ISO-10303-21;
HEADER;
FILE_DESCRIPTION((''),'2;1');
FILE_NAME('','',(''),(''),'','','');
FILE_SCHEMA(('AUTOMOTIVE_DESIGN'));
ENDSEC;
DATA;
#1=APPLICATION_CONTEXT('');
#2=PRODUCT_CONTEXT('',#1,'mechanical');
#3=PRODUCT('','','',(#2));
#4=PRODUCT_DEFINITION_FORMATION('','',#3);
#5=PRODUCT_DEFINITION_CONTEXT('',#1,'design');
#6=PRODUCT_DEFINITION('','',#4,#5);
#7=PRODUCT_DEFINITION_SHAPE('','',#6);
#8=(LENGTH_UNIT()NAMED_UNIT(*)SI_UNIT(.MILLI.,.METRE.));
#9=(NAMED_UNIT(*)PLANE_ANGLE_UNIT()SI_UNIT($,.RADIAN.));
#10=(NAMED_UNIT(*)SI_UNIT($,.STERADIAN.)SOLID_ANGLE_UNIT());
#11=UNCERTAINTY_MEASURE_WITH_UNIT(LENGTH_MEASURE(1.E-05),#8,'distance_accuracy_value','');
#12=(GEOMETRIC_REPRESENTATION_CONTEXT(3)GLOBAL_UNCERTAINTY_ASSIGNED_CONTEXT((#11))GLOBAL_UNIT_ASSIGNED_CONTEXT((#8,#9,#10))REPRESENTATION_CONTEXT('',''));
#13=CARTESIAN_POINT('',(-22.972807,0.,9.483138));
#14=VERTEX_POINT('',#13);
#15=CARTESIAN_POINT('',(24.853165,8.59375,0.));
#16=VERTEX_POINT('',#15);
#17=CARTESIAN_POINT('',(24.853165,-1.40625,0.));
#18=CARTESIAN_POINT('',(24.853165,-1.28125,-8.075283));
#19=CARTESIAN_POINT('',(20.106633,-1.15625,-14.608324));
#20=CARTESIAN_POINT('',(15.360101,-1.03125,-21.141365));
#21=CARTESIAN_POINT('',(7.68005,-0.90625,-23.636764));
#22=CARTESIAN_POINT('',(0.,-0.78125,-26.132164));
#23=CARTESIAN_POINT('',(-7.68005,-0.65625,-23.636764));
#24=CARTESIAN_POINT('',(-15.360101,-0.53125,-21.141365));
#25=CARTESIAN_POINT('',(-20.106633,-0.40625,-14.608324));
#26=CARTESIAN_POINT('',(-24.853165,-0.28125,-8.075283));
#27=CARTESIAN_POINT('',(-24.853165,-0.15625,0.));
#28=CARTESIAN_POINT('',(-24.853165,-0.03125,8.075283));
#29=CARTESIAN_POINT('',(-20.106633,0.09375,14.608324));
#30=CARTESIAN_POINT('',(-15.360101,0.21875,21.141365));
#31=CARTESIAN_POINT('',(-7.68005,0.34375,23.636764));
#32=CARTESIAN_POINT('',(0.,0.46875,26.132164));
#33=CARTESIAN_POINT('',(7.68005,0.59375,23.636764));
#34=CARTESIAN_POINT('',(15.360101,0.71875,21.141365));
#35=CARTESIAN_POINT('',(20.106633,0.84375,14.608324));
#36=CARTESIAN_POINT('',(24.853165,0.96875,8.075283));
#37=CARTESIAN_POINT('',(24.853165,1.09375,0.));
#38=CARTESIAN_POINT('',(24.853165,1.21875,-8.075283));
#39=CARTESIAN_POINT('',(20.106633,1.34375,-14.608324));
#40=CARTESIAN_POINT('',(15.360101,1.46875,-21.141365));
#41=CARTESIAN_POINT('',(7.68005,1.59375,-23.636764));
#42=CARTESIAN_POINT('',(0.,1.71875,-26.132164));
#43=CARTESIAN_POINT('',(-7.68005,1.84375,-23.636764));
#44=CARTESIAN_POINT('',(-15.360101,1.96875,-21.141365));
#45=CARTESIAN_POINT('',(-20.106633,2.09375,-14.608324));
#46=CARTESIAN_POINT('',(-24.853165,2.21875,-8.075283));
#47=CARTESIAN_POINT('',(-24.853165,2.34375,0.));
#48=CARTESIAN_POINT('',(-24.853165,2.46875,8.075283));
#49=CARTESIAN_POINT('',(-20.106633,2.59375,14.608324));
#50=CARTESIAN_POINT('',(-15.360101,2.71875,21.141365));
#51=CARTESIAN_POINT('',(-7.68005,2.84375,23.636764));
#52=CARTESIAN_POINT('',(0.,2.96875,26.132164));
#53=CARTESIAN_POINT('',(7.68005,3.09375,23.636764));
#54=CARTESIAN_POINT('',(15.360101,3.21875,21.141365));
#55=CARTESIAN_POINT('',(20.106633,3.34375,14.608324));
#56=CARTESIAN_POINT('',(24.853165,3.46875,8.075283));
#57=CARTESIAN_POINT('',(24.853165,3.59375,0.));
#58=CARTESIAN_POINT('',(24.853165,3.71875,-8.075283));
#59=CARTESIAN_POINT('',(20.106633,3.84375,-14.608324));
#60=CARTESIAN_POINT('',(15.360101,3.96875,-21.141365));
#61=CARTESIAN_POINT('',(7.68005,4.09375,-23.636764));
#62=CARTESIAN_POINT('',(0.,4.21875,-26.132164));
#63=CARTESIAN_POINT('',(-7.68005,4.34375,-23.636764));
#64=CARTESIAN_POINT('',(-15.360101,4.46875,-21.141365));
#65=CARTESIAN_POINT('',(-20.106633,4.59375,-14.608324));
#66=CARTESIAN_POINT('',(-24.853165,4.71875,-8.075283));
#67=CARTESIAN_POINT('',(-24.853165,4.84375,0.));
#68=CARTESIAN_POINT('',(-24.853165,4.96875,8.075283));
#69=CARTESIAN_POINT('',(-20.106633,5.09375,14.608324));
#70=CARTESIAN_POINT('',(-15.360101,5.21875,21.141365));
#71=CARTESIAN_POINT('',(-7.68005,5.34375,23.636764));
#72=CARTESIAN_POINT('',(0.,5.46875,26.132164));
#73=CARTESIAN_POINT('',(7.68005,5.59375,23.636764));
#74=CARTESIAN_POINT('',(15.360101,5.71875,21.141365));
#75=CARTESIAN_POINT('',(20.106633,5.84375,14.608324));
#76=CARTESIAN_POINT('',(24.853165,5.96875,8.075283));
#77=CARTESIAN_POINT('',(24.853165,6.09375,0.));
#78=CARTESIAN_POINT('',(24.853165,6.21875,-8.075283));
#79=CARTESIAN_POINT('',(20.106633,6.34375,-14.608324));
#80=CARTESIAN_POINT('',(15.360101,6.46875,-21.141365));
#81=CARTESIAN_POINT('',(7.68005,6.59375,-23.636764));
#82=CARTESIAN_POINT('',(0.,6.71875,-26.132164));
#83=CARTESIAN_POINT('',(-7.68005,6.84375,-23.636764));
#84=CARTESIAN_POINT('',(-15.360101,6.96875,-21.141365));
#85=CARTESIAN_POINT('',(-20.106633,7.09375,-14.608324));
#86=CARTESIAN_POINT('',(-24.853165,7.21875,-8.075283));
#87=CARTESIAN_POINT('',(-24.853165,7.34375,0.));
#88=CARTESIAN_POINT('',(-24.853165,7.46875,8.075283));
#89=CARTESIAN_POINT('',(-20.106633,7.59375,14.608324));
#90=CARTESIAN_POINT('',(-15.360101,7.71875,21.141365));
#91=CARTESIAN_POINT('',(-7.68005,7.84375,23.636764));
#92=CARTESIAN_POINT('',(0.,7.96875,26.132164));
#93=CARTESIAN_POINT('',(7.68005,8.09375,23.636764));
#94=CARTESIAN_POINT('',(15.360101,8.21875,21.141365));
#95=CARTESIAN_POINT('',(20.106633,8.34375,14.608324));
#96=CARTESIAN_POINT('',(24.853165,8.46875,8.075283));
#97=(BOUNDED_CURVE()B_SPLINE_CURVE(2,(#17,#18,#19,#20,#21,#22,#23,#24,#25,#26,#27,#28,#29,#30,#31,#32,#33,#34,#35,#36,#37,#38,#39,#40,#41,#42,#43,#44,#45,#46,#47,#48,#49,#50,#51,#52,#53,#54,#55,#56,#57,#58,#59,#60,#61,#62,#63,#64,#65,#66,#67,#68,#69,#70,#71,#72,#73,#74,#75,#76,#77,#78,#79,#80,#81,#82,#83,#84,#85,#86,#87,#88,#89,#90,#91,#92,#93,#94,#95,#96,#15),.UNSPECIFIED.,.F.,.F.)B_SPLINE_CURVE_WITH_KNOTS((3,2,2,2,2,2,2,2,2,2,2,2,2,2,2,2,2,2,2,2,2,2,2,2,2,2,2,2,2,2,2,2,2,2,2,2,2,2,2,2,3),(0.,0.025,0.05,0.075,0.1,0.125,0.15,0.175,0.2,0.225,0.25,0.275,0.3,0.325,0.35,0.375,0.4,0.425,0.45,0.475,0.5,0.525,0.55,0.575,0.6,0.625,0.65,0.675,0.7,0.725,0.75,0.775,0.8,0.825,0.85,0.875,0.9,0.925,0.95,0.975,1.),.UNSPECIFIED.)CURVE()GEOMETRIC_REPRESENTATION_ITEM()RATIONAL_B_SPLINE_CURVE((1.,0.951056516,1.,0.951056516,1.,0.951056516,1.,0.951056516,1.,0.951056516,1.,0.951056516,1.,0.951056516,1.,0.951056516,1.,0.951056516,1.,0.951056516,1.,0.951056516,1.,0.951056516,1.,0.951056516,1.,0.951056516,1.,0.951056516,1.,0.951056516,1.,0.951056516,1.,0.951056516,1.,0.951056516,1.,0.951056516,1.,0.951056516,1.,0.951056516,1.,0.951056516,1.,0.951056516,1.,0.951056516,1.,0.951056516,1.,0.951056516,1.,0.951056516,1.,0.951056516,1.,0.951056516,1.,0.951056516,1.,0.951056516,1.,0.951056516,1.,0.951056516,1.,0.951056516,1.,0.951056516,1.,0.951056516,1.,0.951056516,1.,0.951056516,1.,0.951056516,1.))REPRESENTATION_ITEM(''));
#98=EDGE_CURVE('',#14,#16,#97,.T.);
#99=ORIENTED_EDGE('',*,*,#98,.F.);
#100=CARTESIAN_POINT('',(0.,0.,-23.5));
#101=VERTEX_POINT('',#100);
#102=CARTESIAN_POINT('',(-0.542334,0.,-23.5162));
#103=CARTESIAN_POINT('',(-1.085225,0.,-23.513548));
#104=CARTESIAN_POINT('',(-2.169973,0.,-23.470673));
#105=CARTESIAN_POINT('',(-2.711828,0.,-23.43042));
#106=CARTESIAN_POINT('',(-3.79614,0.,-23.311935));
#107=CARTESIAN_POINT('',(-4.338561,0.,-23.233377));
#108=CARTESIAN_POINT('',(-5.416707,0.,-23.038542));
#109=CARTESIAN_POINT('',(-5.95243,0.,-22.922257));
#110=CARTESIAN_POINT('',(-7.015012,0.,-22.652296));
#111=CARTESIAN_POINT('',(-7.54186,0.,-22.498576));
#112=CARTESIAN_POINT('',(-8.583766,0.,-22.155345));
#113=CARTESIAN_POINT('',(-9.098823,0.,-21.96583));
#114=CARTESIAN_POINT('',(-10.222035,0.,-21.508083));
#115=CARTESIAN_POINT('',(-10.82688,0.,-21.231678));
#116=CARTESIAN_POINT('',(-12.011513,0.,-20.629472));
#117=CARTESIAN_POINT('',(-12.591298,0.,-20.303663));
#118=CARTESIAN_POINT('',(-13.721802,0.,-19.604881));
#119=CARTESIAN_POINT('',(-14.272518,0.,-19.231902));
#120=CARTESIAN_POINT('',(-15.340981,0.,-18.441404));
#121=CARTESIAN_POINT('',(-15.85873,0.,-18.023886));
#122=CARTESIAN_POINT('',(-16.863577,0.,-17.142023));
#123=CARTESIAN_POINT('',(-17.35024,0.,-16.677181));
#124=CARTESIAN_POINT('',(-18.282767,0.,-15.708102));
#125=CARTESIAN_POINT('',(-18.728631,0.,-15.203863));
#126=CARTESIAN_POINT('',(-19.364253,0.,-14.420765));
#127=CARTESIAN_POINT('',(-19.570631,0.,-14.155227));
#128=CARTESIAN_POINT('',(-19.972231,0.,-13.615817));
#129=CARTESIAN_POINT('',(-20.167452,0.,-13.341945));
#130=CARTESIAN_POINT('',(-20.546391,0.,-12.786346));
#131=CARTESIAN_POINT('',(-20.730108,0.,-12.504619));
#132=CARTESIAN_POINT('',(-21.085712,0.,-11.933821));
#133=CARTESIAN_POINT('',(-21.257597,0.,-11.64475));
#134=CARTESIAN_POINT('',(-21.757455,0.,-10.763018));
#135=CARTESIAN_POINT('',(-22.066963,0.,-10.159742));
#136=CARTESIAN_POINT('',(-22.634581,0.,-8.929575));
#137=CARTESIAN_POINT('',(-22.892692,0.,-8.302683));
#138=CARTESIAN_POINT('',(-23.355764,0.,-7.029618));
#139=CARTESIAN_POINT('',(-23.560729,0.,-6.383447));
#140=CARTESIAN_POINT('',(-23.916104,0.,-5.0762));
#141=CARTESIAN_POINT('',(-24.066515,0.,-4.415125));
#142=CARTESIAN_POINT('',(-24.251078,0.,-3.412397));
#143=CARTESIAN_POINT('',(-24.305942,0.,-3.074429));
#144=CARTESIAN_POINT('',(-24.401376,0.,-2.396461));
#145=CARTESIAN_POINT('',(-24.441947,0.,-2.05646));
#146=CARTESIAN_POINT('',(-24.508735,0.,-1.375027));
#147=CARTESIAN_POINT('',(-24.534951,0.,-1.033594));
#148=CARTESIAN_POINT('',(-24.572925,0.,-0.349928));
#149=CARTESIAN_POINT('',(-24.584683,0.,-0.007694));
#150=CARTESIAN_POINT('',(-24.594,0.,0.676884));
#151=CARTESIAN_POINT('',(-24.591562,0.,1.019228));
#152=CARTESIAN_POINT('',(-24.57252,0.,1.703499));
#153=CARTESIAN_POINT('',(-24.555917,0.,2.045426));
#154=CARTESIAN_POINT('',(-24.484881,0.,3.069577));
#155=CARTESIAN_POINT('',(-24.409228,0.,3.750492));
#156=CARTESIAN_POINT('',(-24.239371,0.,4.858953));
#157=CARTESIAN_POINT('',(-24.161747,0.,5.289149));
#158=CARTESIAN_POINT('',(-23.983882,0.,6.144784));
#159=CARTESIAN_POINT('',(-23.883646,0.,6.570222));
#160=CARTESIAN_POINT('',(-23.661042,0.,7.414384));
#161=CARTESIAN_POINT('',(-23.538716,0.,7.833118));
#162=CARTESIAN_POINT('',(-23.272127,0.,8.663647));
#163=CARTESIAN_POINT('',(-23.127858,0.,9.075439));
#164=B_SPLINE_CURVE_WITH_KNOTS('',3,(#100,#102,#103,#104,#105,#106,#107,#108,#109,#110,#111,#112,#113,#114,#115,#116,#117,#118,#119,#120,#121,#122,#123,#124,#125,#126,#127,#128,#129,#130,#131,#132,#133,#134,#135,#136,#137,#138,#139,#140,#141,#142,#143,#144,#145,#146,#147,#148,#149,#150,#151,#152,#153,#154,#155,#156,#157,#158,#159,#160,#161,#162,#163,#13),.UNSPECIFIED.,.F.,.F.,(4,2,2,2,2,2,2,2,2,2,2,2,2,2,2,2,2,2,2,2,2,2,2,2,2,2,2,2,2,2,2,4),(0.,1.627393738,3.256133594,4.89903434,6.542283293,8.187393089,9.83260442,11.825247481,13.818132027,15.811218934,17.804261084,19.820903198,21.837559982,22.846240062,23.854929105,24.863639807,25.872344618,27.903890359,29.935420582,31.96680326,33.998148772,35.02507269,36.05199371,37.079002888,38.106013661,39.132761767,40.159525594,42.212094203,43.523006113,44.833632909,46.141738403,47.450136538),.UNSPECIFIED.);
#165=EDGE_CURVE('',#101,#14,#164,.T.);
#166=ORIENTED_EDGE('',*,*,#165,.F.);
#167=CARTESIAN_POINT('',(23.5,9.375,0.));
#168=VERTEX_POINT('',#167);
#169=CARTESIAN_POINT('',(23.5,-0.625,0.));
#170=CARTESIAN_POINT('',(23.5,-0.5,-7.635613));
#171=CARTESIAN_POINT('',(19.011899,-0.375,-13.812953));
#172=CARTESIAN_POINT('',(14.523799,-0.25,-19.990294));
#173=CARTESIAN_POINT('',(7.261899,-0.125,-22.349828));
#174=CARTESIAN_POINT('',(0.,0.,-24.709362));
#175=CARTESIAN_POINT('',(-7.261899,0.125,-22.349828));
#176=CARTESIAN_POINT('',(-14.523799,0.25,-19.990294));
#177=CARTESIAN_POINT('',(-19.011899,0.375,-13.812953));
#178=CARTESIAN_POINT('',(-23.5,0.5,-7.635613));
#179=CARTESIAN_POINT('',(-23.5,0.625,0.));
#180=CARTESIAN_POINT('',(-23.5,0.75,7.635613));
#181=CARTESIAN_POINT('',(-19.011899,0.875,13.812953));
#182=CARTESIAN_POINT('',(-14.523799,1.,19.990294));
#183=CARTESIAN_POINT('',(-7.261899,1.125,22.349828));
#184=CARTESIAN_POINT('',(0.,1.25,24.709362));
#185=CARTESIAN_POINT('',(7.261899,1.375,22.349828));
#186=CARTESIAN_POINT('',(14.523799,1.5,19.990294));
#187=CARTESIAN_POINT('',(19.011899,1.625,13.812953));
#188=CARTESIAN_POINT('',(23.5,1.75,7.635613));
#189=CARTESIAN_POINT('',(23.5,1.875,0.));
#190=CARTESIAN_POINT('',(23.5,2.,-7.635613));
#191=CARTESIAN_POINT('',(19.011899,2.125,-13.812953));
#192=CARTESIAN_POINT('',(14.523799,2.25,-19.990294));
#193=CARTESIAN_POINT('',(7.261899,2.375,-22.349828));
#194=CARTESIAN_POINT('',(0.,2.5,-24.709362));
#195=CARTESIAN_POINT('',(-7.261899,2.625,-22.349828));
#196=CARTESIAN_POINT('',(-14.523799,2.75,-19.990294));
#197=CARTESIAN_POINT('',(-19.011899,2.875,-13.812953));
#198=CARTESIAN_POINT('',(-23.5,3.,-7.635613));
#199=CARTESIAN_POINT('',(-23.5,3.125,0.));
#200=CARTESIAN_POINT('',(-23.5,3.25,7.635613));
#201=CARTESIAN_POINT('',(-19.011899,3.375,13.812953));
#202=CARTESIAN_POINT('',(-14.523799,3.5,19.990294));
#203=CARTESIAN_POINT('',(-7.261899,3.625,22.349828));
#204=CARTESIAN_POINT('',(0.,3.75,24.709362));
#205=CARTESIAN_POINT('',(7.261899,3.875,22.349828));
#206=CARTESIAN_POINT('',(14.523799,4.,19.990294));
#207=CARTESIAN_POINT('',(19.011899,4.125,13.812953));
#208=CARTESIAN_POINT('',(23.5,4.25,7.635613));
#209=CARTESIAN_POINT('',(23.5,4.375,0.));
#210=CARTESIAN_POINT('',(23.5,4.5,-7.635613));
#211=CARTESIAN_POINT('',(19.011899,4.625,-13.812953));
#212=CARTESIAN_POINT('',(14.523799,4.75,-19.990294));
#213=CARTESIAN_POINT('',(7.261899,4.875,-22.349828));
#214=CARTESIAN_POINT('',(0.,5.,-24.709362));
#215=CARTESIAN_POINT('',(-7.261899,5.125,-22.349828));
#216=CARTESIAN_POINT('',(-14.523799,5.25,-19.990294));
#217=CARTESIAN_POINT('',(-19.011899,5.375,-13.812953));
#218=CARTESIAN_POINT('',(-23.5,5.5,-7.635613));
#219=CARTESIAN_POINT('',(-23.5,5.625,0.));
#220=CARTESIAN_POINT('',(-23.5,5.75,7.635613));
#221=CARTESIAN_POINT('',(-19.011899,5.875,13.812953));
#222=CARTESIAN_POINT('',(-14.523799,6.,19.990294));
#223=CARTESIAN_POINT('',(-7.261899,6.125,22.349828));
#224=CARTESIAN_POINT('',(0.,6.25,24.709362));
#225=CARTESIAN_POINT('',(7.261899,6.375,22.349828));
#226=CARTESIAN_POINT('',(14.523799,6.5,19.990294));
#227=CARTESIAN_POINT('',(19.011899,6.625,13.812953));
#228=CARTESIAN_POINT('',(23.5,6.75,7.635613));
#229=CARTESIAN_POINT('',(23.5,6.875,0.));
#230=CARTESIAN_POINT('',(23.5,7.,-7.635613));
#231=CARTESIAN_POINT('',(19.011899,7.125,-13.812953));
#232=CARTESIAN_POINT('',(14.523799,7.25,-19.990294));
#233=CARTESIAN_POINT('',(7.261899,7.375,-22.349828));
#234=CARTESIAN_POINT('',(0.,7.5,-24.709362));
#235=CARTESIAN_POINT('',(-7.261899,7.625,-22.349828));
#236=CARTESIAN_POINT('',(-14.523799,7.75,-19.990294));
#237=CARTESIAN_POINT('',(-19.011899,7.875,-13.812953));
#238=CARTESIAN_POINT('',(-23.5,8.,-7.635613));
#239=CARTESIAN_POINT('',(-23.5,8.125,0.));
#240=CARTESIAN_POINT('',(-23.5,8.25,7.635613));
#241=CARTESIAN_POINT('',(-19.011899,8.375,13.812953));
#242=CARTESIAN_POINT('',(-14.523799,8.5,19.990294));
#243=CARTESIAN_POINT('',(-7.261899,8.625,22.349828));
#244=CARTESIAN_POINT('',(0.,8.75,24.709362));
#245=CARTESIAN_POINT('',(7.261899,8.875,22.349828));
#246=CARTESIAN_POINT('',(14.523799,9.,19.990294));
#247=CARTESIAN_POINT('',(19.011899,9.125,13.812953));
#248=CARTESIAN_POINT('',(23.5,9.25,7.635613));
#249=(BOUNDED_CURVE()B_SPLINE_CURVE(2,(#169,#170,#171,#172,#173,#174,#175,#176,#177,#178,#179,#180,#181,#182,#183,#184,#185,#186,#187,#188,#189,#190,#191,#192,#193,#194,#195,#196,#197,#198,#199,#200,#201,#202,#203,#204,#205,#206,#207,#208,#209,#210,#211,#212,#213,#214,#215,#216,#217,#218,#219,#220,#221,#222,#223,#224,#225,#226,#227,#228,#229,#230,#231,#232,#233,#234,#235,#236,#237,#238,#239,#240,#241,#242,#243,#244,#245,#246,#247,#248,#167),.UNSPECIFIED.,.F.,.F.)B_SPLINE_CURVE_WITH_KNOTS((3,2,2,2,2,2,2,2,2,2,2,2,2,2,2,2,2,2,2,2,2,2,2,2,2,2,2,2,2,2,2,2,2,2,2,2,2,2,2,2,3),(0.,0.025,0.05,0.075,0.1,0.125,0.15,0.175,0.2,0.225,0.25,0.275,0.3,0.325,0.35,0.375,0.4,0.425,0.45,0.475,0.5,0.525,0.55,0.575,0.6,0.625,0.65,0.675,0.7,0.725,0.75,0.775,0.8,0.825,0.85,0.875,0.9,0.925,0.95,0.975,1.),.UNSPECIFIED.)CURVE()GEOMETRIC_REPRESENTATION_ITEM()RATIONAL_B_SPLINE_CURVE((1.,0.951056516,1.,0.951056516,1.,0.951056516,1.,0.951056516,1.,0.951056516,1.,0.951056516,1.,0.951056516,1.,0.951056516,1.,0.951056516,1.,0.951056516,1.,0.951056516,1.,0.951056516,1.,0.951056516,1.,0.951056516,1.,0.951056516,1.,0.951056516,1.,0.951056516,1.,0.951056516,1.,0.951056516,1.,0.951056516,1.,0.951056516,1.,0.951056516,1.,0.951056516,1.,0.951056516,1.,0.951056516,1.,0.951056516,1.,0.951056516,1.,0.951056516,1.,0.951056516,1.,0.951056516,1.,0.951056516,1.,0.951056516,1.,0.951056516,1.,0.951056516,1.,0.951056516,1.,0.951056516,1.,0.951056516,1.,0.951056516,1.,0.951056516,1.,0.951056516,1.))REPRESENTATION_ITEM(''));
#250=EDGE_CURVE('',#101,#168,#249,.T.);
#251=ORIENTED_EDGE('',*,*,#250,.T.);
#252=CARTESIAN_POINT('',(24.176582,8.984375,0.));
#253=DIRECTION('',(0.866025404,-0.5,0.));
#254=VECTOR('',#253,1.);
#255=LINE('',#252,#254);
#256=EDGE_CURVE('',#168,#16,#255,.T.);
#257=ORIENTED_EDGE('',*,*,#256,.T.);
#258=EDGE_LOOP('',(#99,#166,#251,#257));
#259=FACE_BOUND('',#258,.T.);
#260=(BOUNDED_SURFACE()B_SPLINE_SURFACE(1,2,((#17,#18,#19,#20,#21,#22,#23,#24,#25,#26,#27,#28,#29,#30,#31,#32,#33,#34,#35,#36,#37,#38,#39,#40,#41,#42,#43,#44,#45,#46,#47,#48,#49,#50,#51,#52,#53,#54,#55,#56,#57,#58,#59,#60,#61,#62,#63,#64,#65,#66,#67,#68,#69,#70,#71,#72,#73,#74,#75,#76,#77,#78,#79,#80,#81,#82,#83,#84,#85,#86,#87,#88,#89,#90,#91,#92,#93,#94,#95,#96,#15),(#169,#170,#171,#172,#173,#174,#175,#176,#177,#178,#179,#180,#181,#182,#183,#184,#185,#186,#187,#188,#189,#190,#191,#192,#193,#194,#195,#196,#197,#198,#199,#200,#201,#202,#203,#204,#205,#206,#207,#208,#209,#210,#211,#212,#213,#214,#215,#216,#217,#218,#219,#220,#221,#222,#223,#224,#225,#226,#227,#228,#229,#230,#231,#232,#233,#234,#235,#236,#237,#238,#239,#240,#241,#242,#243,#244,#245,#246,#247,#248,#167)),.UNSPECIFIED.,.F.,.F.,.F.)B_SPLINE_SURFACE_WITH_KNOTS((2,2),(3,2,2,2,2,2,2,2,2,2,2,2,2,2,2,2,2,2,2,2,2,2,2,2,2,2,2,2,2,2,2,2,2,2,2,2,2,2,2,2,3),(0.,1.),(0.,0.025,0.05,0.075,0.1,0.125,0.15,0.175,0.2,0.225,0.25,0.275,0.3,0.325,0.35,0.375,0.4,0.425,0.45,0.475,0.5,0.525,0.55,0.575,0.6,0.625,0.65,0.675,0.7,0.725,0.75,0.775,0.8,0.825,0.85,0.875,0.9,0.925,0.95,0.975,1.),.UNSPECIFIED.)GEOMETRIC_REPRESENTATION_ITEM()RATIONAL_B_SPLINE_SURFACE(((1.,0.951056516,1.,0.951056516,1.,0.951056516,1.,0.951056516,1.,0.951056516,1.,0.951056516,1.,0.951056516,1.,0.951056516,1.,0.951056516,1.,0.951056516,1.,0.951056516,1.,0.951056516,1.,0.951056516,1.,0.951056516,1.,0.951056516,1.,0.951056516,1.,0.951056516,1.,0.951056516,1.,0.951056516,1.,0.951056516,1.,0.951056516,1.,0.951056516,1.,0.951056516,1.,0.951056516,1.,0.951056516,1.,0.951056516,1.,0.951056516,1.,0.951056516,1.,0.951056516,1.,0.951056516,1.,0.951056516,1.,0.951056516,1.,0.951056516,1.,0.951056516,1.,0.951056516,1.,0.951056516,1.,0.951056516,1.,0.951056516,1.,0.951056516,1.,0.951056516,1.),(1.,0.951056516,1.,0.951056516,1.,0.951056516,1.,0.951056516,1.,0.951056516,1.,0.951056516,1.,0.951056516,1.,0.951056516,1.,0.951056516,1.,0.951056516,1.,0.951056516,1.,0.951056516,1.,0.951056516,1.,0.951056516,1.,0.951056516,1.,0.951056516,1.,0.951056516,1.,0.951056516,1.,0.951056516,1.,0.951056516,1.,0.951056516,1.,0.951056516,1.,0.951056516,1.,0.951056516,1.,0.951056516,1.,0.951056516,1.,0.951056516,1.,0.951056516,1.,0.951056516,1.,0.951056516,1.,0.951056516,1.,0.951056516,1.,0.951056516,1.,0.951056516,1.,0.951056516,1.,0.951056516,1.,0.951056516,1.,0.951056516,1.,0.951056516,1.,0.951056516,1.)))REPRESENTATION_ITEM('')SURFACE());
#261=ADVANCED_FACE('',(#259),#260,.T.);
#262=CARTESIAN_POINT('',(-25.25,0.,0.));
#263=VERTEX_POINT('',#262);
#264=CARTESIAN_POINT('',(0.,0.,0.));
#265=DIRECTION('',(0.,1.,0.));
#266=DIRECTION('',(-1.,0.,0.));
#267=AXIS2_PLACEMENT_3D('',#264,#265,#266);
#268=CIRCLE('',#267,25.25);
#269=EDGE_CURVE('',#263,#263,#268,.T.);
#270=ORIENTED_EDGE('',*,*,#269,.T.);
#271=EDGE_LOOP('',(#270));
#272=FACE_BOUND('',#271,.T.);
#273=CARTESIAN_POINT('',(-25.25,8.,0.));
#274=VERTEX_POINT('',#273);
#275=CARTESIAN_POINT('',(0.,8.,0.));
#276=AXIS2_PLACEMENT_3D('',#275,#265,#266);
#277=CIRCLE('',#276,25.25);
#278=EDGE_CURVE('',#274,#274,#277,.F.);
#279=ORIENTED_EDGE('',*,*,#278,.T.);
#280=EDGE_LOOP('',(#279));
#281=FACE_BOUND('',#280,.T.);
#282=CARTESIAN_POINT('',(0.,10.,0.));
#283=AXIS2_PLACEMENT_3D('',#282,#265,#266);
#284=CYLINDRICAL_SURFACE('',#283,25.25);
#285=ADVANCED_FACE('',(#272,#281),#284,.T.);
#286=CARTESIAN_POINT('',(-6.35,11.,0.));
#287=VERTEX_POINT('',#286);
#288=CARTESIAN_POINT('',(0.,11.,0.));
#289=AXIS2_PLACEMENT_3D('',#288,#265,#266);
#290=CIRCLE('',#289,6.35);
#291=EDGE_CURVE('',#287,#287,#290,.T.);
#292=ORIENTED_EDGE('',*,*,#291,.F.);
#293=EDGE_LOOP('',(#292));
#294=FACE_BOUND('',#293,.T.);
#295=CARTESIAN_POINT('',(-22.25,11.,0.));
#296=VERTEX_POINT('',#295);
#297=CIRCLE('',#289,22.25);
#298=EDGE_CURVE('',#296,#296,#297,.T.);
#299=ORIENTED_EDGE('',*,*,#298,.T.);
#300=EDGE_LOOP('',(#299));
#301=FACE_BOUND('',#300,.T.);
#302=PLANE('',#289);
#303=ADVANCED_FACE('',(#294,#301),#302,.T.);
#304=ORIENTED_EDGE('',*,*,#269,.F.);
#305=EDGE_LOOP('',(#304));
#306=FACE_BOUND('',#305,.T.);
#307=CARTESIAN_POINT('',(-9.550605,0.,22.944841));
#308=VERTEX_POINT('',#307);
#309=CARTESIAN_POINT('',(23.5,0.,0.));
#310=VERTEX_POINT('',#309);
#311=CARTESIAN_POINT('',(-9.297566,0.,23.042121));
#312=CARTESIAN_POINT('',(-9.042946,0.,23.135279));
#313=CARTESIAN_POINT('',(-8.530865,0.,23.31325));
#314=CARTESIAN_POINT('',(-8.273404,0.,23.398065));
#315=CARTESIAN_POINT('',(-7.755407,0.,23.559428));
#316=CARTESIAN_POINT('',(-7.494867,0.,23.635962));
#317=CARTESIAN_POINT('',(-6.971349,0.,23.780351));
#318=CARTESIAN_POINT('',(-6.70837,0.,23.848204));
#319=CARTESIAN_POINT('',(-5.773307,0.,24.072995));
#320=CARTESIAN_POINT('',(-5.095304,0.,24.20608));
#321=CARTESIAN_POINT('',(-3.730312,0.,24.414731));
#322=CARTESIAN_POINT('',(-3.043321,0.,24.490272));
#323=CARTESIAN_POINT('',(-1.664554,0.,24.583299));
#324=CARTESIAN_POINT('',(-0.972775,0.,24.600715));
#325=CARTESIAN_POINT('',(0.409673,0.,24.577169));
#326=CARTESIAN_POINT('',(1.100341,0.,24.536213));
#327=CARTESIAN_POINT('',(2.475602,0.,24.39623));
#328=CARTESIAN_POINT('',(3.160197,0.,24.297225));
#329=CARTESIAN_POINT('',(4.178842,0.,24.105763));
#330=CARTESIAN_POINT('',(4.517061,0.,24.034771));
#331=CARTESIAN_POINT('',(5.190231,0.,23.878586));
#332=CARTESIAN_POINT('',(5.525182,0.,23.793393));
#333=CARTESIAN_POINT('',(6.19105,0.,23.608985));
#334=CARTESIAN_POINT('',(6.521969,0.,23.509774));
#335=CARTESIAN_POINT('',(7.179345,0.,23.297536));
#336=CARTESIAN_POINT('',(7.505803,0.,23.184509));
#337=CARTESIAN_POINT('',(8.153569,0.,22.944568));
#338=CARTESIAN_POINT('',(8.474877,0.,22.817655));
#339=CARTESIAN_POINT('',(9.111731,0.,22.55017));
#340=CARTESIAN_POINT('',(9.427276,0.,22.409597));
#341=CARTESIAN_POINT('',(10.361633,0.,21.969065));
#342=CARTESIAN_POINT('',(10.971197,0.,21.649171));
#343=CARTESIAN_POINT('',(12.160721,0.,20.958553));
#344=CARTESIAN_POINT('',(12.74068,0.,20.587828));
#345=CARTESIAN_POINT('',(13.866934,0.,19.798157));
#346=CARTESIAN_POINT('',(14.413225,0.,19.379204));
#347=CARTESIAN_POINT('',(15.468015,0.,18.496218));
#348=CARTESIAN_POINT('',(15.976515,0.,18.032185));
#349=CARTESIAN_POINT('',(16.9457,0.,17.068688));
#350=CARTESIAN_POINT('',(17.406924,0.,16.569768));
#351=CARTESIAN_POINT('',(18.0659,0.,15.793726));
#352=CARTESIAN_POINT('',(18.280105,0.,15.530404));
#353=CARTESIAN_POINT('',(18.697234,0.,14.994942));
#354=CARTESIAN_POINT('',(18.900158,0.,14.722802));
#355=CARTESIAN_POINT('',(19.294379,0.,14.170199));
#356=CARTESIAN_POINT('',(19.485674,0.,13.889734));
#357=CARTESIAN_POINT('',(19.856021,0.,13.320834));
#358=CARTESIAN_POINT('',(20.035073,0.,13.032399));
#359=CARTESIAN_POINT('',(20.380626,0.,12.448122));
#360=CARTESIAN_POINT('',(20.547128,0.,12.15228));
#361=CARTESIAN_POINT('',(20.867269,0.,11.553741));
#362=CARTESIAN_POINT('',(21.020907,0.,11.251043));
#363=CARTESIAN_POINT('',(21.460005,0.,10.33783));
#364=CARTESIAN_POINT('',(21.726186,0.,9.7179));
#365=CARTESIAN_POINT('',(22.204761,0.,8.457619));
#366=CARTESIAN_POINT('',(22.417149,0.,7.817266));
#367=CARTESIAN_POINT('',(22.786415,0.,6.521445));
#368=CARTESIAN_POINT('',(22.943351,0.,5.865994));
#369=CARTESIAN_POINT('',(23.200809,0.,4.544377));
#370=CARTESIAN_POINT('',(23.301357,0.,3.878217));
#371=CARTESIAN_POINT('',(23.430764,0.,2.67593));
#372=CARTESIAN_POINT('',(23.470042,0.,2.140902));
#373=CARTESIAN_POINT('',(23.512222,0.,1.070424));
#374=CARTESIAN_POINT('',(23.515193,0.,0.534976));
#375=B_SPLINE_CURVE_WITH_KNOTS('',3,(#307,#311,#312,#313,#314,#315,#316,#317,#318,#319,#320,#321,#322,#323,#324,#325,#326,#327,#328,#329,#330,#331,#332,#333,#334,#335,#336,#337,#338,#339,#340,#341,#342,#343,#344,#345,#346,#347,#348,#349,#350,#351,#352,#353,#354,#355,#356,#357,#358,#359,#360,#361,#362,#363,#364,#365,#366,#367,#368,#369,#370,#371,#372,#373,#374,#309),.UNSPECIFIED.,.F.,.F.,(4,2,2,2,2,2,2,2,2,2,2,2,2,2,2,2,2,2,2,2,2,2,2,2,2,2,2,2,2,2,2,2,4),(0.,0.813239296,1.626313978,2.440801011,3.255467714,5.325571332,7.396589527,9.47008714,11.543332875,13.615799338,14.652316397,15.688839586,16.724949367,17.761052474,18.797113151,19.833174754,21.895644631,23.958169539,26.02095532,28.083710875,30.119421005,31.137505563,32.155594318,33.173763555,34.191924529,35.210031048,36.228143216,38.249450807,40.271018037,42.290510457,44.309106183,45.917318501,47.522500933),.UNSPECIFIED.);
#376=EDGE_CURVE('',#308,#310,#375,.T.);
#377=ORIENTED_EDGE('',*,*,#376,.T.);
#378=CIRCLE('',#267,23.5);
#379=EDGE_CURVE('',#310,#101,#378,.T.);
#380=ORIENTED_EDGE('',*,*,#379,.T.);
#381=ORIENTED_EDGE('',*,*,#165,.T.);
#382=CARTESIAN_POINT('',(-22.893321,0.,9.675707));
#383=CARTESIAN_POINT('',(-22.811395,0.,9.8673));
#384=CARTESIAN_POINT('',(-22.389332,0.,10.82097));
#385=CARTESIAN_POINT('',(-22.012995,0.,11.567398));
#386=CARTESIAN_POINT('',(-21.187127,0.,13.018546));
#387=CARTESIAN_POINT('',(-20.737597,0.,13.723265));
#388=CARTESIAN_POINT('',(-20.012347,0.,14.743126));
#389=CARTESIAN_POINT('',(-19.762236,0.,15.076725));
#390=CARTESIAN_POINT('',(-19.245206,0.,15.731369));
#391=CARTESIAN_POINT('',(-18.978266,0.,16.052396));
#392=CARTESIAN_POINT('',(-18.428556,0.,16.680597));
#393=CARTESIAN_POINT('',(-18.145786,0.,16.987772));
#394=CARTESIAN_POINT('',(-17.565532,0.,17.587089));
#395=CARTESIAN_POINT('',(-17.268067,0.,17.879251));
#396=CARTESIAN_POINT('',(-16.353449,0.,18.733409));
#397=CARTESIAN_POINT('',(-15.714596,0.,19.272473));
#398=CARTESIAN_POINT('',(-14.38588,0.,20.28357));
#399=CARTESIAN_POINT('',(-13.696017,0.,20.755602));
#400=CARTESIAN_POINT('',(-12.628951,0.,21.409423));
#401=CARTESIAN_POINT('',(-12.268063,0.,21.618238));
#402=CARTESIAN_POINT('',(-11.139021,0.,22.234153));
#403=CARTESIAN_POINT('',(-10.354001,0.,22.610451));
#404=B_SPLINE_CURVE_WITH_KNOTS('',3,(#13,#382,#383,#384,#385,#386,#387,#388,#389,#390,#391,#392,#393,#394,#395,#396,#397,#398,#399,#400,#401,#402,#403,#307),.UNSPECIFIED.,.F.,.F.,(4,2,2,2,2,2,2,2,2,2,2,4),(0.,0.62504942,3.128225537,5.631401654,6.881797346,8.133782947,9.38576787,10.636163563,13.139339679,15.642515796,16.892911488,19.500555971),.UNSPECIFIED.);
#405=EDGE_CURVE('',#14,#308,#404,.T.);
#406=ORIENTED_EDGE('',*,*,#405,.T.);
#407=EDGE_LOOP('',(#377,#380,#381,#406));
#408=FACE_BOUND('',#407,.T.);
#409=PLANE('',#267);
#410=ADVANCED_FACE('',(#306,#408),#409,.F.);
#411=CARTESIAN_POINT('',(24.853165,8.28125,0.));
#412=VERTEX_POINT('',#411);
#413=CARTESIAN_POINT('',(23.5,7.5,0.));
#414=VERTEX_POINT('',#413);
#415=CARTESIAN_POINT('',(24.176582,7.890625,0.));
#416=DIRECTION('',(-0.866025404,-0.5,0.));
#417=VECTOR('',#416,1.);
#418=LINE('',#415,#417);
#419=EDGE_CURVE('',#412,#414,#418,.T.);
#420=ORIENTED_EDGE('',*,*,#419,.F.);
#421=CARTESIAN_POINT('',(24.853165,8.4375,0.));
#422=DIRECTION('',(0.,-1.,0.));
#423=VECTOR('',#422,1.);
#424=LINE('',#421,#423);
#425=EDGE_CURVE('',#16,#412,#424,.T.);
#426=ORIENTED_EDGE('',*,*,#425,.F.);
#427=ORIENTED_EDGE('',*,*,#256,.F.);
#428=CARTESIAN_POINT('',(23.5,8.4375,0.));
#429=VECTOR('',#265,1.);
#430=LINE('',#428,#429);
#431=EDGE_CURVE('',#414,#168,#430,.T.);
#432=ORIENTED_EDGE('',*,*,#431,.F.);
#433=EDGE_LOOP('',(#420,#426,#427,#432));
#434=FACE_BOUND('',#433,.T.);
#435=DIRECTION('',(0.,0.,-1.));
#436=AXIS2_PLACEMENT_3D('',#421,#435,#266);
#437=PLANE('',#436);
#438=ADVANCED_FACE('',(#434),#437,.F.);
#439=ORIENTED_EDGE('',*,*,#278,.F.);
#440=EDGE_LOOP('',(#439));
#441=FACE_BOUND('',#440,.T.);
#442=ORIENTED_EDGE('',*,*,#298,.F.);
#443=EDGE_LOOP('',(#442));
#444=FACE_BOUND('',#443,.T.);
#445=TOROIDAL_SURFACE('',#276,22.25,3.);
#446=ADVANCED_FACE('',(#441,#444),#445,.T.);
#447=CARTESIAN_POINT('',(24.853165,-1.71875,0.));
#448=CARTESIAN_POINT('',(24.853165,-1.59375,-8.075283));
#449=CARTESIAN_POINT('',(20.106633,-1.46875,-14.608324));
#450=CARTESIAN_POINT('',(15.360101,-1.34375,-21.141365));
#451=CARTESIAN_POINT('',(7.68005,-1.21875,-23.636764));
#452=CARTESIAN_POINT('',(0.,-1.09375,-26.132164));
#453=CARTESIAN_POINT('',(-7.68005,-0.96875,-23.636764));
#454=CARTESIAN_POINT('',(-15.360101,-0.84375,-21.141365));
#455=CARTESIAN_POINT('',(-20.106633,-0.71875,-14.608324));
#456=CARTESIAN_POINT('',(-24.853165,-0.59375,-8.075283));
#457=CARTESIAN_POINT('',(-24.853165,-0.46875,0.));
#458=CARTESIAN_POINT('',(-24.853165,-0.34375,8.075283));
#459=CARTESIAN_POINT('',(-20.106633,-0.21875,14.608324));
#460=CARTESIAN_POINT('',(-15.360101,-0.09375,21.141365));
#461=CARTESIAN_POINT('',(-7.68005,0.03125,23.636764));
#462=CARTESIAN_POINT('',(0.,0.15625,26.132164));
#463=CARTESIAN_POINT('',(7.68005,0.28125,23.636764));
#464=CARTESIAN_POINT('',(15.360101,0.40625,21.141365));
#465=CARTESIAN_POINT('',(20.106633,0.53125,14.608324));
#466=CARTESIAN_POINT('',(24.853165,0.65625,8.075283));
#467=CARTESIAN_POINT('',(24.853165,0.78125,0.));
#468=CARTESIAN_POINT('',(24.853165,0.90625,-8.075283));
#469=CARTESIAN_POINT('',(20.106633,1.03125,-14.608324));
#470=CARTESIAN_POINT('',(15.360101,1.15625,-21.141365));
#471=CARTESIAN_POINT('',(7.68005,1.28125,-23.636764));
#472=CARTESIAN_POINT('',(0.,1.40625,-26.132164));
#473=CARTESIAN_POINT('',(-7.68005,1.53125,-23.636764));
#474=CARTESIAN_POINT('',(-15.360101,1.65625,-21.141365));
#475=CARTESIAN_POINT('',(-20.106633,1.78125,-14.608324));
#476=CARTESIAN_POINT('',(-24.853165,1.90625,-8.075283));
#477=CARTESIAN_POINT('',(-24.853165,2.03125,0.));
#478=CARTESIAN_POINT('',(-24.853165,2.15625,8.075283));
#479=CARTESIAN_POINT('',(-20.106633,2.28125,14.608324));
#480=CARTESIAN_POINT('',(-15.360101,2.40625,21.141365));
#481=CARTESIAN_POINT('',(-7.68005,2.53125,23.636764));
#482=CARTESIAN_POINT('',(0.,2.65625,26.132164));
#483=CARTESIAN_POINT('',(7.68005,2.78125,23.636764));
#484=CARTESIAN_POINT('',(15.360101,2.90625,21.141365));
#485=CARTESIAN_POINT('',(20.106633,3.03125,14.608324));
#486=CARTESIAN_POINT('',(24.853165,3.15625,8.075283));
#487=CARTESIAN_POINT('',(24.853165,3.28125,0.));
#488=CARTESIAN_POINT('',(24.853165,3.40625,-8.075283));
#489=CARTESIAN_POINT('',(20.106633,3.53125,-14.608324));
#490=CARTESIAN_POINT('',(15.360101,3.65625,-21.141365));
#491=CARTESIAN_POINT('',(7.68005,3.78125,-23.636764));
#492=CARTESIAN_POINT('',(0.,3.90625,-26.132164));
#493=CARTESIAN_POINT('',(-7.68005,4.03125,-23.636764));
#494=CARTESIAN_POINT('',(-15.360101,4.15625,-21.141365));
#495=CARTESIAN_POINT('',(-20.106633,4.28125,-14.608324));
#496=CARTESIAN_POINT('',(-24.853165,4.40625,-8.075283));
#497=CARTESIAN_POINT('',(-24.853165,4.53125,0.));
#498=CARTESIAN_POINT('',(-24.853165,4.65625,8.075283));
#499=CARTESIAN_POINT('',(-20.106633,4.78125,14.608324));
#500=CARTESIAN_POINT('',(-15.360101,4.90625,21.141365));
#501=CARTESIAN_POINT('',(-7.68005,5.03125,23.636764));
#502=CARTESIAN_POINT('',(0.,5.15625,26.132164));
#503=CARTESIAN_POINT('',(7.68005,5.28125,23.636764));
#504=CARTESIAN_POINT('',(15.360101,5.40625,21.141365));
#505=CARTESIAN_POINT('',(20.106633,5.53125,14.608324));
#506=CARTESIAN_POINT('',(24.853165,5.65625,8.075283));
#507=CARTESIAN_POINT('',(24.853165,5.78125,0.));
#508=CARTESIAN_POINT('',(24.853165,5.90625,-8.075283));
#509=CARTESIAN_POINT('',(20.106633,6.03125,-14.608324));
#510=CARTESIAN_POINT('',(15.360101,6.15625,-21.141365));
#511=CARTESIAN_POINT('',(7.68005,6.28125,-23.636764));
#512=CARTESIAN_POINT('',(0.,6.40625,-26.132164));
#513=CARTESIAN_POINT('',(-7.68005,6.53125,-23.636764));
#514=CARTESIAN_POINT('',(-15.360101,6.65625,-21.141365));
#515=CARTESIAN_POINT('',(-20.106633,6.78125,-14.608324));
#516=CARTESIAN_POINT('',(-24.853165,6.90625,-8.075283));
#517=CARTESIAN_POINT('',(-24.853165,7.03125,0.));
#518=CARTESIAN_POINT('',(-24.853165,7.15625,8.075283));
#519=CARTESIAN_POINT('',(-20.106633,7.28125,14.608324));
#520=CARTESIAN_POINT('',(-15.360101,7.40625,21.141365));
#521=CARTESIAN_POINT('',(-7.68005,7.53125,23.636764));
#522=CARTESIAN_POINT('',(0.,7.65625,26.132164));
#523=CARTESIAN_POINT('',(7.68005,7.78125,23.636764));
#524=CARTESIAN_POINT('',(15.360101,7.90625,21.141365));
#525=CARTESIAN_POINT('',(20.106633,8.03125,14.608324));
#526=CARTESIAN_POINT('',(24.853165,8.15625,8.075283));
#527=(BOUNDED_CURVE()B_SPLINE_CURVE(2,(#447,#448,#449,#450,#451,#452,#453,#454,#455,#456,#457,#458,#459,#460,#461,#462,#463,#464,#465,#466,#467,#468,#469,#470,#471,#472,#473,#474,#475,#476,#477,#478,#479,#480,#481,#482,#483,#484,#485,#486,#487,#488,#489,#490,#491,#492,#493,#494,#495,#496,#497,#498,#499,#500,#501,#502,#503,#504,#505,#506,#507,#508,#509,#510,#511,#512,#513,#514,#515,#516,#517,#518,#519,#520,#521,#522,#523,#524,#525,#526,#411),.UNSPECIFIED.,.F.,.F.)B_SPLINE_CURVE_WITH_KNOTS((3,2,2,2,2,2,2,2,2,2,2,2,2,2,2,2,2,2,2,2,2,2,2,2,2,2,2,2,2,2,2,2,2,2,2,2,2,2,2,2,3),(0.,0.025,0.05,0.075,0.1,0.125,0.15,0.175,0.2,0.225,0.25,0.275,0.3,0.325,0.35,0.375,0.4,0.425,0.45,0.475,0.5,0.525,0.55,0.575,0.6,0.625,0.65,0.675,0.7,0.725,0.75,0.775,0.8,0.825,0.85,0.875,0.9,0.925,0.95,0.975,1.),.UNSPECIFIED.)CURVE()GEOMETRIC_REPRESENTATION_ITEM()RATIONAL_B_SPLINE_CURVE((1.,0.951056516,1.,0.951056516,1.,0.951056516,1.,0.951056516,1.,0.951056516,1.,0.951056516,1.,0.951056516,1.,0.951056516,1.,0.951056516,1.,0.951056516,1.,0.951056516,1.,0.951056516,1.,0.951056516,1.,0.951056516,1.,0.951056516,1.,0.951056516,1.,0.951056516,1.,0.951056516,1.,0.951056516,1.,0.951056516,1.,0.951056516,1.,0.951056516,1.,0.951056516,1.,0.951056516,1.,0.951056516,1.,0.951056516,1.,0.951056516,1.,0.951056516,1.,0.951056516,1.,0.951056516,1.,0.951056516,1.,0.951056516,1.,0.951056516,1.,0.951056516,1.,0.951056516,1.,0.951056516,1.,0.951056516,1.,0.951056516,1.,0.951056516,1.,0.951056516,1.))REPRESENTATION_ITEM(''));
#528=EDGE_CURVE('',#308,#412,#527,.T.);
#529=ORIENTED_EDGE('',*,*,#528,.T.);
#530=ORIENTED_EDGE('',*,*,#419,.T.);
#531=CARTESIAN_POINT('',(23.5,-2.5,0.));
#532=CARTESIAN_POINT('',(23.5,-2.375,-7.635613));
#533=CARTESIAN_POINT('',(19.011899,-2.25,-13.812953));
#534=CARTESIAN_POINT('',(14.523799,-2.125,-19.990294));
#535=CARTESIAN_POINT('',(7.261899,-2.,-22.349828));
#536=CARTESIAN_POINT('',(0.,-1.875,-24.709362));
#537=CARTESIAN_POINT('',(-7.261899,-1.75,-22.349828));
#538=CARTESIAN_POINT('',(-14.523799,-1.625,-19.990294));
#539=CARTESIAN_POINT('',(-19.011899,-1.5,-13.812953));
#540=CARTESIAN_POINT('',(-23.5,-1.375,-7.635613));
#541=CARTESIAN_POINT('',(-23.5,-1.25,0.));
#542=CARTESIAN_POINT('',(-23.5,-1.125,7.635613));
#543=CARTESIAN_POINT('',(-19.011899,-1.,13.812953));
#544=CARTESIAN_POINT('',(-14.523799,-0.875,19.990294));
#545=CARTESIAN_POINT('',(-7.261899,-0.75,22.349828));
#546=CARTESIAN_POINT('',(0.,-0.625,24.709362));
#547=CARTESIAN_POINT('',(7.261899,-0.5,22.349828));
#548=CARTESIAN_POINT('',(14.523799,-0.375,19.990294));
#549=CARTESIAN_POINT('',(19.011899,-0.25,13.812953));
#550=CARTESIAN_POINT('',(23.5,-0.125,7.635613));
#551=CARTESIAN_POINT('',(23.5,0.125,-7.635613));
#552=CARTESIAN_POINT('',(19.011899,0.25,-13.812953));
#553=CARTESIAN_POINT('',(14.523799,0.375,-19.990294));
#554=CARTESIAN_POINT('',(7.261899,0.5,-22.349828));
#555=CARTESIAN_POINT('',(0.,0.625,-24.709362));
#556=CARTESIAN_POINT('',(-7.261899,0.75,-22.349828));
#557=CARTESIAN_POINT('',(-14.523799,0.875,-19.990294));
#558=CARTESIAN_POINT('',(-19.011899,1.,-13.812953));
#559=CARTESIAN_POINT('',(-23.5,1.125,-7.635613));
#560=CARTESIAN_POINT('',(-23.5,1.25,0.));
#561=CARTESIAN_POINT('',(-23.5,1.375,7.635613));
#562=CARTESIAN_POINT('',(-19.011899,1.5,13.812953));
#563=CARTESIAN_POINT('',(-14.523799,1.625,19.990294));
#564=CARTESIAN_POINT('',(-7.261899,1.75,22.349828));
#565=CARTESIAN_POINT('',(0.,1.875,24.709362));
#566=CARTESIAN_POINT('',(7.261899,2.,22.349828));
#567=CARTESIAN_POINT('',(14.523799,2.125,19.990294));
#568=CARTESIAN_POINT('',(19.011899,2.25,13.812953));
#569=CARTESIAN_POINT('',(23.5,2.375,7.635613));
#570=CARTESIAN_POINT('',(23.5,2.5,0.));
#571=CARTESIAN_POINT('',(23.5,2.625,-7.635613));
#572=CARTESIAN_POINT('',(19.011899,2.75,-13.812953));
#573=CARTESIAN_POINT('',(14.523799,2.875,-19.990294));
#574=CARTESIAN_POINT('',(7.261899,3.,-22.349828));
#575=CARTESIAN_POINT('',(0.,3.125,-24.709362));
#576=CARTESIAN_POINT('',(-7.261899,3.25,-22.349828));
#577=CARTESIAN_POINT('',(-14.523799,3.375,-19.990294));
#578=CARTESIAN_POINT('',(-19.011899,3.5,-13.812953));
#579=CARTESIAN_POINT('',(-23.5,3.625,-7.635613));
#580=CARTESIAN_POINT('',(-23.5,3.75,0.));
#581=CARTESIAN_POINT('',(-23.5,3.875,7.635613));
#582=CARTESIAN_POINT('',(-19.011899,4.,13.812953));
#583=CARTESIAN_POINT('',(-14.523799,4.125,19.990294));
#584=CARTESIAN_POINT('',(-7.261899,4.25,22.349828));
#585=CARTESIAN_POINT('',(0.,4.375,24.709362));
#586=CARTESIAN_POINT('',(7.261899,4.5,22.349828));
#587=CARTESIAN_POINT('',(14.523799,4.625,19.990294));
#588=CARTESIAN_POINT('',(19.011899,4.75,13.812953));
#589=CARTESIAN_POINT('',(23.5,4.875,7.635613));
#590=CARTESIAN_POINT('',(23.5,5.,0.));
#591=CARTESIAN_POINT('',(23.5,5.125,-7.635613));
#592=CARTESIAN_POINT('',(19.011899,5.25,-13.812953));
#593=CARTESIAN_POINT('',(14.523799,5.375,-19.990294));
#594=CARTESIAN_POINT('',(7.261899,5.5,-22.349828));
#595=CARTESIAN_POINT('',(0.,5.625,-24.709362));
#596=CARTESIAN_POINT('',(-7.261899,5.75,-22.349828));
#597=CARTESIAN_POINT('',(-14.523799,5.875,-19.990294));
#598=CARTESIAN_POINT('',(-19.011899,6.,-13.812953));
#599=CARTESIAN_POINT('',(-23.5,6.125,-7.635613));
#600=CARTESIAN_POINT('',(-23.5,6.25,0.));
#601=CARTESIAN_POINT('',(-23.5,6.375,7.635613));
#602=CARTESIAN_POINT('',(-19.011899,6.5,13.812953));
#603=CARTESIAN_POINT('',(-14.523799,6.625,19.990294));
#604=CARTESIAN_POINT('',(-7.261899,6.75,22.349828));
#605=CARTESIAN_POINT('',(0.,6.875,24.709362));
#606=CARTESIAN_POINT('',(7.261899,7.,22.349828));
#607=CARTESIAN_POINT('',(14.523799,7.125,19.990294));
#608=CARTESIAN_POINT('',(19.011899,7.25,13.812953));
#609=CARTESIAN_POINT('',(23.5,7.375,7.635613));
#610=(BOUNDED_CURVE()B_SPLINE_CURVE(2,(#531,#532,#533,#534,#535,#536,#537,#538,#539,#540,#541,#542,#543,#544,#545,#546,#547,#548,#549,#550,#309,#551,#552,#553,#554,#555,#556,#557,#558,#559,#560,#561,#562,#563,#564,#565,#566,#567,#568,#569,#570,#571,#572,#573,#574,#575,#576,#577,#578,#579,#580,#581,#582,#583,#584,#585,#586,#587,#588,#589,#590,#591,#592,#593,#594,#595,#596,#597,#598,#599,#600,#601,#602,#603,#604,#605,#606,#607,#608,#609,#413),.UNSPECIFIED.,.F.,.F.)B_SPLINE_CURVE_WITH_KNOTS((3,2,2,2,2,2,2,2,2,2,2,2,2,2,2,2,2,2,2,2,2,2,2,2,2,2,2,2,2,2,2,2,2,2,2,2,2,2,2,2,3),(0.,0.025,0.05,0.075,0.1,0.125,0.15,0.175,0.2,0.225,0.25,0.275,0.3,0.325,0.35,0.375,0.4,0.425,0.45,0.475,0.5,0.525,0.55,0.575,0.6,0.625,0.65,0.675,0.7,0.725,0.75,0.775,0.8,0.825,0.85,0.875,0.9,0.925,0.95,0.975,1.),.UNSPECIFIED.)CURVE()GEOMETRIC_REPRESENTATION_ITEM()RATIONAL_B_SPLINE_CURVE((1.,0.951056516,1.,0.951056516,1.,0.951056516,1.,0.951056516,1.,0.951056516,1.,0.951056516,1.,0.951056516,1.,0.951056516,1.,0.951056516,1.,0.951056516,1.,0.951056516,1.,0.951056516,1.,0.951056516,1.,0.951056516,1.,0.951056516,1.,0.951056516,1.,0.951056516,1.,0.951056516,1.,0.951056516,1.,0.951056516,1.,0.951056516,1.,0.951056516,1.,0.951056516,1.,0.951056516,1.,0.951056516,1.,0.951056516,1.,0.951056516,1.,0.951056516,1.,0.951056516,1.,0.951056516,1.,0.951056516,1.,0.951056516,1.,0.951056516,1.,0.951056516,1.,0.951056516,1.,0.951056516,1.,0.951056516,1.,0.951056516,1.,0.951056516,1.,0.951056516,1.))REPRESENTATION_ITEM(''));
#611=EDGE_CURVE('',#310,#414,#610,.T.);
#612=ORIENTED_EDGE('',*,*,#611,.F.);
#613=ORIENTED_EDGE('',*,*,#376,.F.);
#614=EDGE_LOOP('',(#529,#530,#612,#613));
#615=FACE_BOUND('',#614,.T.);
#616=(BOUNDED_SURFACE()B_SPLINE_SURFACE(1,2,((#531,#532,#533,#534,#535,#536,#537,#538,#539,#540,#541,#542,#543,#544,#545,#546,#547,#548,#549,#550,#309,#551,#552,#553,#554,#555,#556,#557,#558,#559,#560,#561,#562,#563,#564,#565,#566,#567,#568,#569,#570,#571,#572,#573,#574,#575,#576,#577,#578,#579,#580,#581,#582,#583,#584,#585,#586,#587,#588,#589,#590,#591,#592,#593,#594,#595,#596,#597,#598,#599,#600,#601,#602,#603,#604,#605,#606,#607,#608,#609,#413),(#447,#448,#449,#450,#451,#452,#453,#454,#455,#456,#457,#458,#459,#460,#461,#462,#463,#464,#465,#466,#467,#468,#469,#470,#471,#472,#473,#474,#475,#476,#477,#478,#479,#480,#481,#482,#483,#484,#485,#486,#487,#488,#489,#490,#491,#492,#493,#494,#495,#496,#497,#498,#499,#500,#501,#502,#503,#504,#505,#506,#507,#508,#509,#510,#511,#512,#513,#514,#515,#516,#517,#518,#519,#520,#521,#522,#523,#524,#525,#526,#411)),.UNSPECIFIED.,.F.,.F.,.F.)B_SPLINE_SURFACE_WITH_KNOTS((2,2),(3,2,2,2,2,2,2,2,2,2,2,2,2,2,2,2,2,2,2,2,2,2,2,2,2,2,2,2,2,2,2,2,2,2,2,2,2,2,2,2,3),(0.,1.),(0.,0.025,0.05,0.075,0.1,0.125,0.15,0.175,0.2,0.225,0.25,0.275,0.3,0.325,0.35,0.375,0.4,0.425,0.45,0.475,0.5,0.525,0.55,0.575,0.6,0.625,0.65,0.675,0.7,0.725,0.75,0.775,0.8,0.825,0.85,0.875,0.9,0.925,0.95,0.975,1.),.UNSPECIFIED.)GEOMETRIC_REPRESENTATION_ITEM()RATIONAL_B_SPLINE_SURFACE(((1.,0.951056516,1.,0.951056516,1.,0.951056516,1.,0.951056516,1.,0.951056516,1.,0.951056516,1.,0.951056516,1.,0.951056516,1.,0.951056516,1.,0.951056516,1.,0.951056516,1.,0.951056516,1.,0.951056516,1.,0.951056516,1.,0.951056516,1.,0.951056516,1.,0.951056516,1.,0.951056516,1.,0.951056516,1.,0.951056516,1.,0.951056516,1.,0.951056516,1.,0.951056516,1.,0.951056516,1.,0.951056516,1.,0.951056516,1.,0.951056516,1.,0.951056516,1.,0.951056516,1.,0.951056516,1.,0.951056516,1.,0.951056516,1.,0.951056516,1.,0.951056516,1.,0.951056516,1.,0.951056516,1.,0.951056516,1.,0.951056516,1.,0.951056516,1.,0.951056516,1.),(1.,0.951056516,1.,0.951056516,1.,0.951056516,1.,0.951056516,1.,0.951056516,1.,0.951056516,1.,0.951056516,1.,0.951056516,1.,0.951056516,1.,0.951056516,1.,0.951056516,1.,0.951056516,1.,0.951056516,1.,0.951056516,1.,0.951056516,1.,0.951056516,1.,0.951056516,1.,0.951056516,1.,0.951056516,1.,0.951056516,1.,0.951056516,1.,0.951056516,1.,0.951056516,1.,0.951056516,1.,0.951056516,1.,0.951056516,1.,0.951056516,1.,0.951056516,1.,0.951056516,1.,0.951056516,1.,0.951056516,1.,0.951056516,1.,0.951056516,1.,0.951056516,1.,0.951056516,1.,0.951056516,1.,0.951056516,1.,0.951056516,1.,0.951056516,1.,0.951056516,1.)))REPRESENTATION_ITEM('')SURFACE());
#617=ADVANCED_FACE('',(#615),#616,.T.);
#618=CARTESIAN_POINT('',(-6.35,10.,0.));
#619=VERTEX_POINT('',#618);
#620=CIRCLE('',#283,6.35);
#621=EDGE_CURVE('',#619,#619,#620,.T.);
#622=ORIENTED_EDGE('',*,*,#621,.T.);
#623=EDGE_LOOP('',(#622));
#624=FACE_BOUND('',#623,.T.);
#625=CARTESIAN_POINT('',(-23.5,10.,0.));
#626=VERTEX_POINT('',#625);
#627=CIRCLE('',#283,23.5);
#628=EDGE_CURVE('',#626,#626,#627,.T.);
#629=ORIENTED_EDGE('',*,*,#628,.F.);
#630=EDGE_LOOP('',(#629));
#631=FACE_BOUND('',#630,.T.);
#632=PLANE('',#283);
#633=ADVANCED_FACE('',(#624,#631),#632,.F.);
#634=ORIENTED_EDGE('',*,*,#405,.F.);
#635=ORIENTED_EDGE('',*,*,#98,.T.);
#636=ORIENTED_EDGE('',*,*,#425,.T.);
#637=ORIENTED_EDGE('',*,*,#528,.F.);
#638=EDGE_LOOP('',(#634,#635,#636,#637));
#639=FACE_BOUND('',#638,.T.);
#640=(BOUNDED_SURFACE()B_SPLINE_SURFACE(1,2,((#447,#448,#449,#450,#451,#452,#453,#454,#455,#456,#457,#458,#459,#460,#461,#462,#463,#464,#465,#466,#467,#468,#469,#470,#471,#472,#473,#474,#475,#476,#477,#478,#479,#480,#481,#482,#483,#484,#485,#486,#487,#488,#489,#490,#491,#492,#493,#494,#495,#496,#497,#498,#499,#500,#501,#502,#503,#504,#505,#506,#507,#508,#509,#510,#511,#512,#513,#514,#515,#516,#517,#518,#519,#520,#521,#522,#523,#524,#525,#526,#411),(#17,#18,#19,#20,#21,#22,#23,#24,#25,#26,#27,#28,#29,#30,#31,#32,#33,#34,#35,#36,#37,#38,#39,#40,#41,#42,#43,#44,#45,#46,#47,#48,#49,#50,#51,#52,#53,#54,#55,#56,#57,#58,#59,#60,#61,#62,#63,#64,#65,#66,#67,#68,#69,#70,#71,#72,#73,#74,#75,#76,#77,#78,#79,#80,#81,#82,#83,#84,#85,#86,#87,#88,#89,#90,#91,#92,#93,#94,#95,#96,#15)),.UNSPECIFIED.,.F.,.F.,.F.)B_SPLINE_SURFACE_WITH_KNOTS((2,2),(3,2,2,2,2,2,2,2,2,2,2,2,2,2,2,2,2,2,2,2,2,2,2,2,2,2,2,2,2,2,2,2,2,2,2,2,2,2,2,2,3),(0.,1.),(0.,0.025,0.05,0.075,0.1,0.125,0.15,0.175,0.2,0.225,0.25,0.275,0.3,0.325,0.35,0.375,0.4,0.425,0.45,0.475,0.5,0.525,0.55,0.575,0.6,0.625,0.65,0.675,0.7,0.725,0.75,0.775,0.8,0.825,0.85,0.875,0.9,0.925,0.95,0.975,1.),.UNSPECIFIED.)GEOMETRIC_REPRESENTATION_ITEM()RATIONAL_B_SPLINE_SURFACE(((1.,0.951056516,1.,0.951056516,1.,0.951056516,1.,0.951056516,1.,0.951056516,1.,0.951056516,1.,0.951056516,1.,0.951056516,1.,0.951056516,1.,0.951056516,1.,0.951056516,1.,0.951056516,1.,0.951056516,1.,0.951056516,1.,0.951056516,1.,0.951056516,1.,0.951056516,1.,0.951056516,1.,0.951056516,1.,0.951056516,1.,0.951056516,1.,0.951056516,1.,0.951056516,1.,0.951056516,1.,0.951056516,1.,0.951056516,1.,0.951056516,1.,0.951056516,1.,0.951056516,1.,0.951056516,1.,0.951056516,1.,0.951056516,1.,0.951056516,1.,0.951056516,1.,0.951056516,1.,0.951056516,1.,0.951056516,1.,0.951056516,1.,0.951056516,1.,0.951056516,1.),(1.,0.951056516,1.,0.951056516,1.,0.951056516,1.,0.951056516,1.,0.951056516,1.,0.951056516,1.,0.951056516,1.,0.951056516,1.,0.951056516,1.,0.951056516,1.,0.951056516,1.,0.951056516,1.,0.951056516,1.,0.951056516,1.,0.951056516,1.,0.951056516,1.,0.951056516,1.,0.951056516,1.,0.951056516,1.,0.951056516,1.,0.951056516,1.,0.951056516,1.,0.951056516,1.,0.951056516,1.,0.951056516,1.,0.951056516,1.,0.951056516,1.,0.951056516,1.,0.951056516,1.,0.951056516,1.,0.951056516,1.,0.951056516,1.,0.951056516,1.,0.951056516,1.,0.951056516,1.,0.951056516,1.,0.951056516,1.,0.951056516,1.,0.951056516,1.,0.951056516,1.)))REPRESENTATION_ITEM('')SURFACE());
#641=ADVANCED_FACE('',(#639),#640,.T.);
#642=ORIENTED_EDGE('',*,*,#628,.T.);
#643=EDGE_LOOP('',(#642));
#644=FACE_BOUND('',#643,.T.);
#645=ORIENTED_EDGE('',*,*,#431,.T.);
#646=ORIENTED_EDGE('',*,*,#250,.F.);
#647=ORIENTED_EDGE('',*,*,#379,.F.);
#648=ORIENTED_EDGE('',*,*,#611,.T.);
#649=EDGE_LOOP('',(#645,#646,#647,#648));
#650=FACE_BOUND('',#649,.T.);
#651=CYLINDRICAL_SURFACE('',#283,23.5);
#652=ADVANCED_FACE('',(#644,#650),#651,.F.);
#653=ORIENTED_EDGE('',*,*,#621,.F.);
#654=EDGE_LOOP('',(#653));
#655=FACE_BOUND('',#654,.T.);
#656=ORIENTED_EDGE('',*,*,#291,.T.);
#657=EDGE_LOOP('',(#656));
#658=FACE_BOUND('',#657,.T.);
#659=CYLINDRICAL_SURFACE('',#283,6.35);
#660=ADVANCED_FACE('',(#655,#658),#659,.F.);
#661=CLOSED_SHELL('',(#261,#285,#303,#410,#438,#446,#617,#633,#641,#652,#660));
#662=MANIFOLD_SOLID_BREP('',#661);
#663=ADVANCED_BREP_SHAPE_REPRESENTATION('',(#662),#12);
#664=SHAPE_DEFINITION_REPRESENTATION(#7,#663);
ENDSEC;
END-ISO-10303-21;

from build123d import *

# Parameters (mm, degrees)
SKETCH1_W     = 17.15
SKETCH1_H     = 1
THREAD1_PITCH = 2.5
FILLET1_R     = 3


with BuildPart() as part:
    # Sketch1 → Revolve1 (revolve)
    with BuildSketch(Plane.XY, mode=Mode.PRIVATE) as revolve1_sk:
        with Locations((14.925, 10.5)):
            Rectangle(SKETCH1_W, SKETCH1_H)
        Polygon((23.5, 11), (23.5, 10), (23.5, 0), (25.25, 0), (25.25, 11), align=None)
    revolve(revolve1_sk.sketch.rotate(Axis((0, 10, 0), (0, -1, 0)), 180), axis=Axis((0, 10, 0), (0, -1, 0)))

    # Thread1: the profile of Thread Profile1 profile screwed along a right-hand helix of 4 turns, 10 arcs to a turn; built about Z, then put on its axis
    thread1_z = Axis((0, 0, 0), (0, 0, 1))
    thread1_corners = [(23.4997, 0, -0.000173205), (24.853164688, 0, 0.781249997), (24.853164688, 0, 1.093749997), (23.4997, 0, 1.875173198)]
    with BuildLine(mode=Mode.PRIVATE) as thread1_profile:
        Line(thread1_corners[0], thread1_corners[1])
        Line(thread1_corners[1], thread1_corners[2])
        Line(thread1_corners[2], thread1_corners[3])
        Line(thread1_corners[3], thread1_corners[0])
    thread1_cap = Face(thread1_profile.wire())
    thread1_turn_angles = [0, 18, 36, 54, 72, 90, 108, 126, 144, 162, 180, 198, 216, 234, 252, 270, 288, 306, 324, 342, 360]
    thread1_turn_weights = [1, 0.9510565162951535, 1, 0.9510565162951535, 1, 0.9510565162951535, 1, 0.9510565162951535, 1, 0.9510565162951535, 1, 0.9510565162951535, 1, 0.9510565162951535, 1, 0.9510565162951535, 1, 0.9510565162951535, 1, 0.9510565162951535, 1]
    thread1_turn_rails = [Edge.make_bspline([Vector(p[0], p[1], 0).rotate(thread1_z, thread1_turn_angles[k]) / thread1_turn_weights[k] + Vector(0, 0, p[2] + THREAD1_PITCH * thread1_turn_angles[k] / 360) for k in range(21)], [0, 0, 0, 1, 1, 2, 2, 3, 3, 4, 4, 5, 5, 6, 6, 7, 7, 8, 8, 9, 9, 10, 10, 10], 2, thread1_turn_weights) for p in thread1_corners]
    thread1_turn_sides = [Face.make_surface_from_curves(thread1_turn_rails[p[0]], thread1_turn_rails[p[1]]) for p in [(0, 1), (1, 2), (2, 3), (3, 0)]]
    thread1 = Plane(origin=(0, -2.5, 0), x_dir=(1, 0, 0), z_dir=(0, 1, 0)) * Solid(Shell([*[p.moved(Location((0, 0, THREAD1_PITCH * i))) for i in range(4) for p in thread1_turn_sides], thread1_cap, thread1_cap.rotate(thread1_z, 1440).moved(Location((0, 0, THREAD1_PITCH * 1440 / 360)))]))
    add(thread1, mode=Mode.SUBTRACT)

    # Fillet1
    fillet1_edges = [part.edges().sort_by_distance(p)[0] for p in [
        (25.25, 11, 0),
    ]]
    fillet(fillet1_edges, radius=FILLET1_R)


solid = part.part
